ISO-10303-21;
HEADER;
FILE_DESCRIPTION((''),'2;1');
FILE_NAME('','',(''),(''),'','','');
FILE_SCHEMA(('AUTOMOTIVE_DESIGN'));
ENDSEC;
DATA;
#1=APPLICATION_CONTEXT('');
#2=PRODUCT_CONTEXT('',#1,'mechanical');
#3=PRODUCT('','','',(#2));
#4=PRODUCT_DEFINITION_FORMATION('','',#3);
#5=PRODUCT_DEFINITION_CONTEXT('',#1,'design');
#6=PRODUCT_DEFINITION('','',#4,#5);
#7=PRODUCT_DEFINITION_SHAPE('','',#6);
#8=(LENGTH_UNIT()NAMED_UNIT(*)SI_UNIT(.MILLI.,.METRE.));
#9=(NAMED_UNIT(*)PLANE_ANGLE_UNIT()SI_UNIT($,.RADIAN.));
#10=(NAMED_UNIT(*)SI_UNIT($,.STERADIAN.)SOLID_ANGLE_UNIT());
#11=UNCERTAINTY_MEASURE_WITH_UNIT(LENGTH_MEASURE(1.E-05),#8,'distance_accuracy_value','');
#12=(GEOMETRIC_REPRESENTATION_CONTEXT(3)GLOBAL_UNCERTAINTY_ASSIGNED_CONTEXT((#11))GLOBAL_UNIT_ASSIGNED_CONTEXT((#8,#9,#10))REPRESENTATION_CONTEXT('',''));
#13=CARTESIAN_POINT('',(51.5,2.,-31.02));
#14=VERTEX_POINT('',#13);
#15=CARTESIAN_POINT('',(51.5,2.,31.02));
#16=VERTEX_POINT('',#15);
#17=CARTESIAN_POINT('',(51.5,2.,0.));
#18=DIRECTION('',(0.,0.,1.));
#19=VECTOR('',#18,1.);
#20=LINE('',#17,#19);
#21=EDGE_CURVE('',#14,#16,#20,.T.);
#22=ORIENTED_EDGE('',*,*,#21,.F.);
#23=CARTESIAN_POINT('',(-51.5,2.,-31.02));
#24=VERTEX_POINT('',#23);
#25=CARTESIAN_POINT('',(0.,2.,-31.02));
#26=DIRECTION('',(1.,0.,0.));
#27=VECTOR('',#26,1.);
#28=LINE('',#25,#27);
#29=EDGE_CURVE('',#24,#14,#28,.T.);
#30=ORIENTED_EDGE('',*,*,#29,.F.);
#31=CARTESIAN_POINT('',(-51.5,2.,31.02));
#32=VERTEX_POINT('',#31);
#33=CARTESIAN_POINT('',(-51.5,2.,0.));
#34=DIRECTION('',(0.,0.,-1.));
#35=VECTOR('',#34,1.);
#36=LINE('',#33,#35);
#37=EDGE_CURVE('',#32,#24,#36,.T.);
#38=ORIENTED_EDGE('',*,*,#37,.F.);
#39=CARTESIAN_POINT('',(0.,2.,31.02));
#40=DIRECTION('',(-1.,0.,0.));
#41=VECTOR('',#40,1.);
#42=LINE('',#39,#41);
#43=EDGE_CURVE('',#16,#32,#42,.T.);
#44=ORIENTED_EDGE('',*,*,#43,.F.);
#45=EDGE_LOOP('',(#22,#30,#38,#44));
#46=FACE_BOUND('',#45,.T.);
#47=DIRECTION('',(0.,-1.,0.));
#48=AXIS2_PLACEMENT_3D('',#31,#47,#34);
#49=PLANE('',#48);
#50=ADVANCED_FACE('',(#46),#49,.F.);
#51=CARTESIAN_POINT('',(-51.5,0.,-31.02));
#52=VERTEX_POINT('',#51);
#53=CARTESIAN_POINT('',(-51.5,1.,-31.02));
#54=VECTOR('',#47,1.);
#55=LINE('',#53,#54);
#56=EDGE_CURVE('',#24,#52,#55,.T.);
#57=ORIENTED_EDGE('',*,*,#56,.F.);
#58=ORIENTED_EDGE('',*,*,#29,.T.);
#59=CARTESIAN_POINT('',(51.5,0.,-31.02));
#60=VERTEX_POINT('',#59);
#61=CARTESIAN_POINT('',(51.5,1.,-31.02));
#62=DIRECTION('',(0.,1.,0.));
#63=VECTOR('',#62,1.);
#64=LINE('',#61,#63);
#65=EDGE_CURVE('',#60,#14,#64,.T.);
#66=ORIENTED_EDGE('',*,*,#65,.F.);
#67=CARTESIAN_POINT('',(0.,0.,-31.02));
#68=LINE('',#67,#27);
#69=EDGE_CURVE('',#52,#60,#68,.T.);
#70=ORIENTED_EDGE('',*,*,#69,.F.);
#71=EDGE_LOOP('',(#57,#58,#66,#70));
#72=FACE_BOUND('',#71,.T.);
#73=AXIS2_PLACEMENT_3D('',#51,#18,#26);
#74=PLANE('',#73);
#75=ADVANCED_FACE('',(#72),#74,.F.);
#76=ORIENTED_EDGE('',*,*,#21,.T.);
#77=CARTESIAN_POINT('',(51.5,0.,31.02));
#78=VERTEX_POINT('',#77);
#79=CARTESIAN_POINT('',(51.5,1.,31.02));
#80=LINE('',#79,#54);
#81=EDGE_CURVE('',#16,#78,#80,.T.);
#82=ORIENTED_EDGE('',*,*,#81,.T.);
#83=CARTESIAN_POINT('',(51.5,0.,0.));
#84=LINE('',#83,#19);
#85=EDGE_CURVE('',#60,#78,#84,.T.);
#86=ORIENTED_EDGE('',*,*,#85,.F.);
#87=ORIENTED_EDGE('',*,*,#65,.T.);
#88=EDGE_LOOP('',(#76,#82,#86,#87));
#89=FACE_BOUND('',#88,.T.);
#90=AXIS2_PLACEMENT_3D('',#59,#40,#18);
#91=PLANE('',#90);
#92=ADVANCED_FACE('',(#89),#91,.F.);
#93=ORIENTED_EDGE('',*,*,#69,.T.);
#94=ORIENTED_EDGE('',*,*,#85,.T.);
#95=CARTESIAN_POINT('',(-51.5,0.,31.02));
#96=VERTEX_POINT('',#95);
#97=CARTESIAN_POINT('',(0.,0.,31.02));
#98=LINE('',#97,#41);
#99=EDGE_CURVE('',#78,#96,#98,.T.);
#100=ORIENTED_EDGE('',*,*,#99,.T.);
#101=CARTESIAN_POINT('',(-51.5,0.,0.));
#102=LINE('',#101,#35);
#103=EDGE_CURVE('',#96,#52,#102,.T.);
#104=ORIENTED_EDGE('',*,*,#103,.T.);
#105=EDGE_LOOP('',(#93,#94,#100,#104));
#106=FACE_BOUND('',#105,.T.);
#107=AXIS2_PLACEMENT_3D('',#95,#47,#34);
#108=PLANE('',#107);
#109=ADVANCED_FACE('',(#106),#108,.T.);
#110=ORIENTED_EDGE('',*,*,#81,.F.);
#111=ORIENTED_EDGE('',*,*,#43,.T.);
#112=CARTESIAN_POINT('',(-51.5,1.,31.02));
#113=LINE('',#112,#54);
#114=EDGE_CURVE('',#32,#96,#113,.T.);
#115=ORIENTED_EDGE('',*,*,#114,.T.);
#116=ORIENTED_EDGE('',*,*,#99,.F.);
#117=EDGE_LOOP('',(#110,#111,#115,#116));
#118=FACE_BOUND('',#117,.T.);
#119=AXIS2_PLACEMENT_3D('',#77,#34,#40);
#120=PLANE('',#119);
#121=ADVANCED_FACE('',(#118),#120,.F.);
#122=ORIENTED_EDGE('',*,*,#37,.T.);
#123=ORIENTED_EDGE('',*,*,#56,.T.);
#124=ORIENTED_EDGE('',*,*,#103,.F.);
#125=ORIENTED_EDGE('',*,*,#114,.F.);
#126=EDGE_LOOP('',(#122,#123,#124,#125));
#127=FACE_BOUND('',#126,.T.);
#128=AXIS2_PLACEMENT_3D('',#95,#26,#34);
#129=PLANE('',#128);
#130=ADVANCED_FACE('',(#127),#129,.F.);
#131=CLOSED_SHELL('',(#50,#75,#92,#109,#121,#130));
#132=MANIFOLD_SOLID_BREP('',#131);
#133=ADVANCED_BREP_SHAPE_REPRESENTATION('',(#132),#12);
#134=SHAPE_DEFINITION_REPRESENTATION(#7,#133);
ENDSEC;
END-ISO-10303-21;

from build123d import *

# Parameters (mm, degrees)
SKETCH1_W           = 103
SKETCH1_H           = 62.04
BOSS_EXTRUDE1_DEPTH = 2


# Read off the part's stored shape, not the designer's step: Imported1
with BuildPart() as part:
    # Sketch1 → Boss-Extrude1 (new body)
    with BuildSketch(Plane(origin=(0, 2, 0), x_dir=(1, 0, 0), z_dir=(0, 1, 0))):
        Rectangle(SKETCH1_W, SKETCH1_H)
    extrude(amount=-BOSS_EXTRUDE1_DEPTH)


solid = part.part
